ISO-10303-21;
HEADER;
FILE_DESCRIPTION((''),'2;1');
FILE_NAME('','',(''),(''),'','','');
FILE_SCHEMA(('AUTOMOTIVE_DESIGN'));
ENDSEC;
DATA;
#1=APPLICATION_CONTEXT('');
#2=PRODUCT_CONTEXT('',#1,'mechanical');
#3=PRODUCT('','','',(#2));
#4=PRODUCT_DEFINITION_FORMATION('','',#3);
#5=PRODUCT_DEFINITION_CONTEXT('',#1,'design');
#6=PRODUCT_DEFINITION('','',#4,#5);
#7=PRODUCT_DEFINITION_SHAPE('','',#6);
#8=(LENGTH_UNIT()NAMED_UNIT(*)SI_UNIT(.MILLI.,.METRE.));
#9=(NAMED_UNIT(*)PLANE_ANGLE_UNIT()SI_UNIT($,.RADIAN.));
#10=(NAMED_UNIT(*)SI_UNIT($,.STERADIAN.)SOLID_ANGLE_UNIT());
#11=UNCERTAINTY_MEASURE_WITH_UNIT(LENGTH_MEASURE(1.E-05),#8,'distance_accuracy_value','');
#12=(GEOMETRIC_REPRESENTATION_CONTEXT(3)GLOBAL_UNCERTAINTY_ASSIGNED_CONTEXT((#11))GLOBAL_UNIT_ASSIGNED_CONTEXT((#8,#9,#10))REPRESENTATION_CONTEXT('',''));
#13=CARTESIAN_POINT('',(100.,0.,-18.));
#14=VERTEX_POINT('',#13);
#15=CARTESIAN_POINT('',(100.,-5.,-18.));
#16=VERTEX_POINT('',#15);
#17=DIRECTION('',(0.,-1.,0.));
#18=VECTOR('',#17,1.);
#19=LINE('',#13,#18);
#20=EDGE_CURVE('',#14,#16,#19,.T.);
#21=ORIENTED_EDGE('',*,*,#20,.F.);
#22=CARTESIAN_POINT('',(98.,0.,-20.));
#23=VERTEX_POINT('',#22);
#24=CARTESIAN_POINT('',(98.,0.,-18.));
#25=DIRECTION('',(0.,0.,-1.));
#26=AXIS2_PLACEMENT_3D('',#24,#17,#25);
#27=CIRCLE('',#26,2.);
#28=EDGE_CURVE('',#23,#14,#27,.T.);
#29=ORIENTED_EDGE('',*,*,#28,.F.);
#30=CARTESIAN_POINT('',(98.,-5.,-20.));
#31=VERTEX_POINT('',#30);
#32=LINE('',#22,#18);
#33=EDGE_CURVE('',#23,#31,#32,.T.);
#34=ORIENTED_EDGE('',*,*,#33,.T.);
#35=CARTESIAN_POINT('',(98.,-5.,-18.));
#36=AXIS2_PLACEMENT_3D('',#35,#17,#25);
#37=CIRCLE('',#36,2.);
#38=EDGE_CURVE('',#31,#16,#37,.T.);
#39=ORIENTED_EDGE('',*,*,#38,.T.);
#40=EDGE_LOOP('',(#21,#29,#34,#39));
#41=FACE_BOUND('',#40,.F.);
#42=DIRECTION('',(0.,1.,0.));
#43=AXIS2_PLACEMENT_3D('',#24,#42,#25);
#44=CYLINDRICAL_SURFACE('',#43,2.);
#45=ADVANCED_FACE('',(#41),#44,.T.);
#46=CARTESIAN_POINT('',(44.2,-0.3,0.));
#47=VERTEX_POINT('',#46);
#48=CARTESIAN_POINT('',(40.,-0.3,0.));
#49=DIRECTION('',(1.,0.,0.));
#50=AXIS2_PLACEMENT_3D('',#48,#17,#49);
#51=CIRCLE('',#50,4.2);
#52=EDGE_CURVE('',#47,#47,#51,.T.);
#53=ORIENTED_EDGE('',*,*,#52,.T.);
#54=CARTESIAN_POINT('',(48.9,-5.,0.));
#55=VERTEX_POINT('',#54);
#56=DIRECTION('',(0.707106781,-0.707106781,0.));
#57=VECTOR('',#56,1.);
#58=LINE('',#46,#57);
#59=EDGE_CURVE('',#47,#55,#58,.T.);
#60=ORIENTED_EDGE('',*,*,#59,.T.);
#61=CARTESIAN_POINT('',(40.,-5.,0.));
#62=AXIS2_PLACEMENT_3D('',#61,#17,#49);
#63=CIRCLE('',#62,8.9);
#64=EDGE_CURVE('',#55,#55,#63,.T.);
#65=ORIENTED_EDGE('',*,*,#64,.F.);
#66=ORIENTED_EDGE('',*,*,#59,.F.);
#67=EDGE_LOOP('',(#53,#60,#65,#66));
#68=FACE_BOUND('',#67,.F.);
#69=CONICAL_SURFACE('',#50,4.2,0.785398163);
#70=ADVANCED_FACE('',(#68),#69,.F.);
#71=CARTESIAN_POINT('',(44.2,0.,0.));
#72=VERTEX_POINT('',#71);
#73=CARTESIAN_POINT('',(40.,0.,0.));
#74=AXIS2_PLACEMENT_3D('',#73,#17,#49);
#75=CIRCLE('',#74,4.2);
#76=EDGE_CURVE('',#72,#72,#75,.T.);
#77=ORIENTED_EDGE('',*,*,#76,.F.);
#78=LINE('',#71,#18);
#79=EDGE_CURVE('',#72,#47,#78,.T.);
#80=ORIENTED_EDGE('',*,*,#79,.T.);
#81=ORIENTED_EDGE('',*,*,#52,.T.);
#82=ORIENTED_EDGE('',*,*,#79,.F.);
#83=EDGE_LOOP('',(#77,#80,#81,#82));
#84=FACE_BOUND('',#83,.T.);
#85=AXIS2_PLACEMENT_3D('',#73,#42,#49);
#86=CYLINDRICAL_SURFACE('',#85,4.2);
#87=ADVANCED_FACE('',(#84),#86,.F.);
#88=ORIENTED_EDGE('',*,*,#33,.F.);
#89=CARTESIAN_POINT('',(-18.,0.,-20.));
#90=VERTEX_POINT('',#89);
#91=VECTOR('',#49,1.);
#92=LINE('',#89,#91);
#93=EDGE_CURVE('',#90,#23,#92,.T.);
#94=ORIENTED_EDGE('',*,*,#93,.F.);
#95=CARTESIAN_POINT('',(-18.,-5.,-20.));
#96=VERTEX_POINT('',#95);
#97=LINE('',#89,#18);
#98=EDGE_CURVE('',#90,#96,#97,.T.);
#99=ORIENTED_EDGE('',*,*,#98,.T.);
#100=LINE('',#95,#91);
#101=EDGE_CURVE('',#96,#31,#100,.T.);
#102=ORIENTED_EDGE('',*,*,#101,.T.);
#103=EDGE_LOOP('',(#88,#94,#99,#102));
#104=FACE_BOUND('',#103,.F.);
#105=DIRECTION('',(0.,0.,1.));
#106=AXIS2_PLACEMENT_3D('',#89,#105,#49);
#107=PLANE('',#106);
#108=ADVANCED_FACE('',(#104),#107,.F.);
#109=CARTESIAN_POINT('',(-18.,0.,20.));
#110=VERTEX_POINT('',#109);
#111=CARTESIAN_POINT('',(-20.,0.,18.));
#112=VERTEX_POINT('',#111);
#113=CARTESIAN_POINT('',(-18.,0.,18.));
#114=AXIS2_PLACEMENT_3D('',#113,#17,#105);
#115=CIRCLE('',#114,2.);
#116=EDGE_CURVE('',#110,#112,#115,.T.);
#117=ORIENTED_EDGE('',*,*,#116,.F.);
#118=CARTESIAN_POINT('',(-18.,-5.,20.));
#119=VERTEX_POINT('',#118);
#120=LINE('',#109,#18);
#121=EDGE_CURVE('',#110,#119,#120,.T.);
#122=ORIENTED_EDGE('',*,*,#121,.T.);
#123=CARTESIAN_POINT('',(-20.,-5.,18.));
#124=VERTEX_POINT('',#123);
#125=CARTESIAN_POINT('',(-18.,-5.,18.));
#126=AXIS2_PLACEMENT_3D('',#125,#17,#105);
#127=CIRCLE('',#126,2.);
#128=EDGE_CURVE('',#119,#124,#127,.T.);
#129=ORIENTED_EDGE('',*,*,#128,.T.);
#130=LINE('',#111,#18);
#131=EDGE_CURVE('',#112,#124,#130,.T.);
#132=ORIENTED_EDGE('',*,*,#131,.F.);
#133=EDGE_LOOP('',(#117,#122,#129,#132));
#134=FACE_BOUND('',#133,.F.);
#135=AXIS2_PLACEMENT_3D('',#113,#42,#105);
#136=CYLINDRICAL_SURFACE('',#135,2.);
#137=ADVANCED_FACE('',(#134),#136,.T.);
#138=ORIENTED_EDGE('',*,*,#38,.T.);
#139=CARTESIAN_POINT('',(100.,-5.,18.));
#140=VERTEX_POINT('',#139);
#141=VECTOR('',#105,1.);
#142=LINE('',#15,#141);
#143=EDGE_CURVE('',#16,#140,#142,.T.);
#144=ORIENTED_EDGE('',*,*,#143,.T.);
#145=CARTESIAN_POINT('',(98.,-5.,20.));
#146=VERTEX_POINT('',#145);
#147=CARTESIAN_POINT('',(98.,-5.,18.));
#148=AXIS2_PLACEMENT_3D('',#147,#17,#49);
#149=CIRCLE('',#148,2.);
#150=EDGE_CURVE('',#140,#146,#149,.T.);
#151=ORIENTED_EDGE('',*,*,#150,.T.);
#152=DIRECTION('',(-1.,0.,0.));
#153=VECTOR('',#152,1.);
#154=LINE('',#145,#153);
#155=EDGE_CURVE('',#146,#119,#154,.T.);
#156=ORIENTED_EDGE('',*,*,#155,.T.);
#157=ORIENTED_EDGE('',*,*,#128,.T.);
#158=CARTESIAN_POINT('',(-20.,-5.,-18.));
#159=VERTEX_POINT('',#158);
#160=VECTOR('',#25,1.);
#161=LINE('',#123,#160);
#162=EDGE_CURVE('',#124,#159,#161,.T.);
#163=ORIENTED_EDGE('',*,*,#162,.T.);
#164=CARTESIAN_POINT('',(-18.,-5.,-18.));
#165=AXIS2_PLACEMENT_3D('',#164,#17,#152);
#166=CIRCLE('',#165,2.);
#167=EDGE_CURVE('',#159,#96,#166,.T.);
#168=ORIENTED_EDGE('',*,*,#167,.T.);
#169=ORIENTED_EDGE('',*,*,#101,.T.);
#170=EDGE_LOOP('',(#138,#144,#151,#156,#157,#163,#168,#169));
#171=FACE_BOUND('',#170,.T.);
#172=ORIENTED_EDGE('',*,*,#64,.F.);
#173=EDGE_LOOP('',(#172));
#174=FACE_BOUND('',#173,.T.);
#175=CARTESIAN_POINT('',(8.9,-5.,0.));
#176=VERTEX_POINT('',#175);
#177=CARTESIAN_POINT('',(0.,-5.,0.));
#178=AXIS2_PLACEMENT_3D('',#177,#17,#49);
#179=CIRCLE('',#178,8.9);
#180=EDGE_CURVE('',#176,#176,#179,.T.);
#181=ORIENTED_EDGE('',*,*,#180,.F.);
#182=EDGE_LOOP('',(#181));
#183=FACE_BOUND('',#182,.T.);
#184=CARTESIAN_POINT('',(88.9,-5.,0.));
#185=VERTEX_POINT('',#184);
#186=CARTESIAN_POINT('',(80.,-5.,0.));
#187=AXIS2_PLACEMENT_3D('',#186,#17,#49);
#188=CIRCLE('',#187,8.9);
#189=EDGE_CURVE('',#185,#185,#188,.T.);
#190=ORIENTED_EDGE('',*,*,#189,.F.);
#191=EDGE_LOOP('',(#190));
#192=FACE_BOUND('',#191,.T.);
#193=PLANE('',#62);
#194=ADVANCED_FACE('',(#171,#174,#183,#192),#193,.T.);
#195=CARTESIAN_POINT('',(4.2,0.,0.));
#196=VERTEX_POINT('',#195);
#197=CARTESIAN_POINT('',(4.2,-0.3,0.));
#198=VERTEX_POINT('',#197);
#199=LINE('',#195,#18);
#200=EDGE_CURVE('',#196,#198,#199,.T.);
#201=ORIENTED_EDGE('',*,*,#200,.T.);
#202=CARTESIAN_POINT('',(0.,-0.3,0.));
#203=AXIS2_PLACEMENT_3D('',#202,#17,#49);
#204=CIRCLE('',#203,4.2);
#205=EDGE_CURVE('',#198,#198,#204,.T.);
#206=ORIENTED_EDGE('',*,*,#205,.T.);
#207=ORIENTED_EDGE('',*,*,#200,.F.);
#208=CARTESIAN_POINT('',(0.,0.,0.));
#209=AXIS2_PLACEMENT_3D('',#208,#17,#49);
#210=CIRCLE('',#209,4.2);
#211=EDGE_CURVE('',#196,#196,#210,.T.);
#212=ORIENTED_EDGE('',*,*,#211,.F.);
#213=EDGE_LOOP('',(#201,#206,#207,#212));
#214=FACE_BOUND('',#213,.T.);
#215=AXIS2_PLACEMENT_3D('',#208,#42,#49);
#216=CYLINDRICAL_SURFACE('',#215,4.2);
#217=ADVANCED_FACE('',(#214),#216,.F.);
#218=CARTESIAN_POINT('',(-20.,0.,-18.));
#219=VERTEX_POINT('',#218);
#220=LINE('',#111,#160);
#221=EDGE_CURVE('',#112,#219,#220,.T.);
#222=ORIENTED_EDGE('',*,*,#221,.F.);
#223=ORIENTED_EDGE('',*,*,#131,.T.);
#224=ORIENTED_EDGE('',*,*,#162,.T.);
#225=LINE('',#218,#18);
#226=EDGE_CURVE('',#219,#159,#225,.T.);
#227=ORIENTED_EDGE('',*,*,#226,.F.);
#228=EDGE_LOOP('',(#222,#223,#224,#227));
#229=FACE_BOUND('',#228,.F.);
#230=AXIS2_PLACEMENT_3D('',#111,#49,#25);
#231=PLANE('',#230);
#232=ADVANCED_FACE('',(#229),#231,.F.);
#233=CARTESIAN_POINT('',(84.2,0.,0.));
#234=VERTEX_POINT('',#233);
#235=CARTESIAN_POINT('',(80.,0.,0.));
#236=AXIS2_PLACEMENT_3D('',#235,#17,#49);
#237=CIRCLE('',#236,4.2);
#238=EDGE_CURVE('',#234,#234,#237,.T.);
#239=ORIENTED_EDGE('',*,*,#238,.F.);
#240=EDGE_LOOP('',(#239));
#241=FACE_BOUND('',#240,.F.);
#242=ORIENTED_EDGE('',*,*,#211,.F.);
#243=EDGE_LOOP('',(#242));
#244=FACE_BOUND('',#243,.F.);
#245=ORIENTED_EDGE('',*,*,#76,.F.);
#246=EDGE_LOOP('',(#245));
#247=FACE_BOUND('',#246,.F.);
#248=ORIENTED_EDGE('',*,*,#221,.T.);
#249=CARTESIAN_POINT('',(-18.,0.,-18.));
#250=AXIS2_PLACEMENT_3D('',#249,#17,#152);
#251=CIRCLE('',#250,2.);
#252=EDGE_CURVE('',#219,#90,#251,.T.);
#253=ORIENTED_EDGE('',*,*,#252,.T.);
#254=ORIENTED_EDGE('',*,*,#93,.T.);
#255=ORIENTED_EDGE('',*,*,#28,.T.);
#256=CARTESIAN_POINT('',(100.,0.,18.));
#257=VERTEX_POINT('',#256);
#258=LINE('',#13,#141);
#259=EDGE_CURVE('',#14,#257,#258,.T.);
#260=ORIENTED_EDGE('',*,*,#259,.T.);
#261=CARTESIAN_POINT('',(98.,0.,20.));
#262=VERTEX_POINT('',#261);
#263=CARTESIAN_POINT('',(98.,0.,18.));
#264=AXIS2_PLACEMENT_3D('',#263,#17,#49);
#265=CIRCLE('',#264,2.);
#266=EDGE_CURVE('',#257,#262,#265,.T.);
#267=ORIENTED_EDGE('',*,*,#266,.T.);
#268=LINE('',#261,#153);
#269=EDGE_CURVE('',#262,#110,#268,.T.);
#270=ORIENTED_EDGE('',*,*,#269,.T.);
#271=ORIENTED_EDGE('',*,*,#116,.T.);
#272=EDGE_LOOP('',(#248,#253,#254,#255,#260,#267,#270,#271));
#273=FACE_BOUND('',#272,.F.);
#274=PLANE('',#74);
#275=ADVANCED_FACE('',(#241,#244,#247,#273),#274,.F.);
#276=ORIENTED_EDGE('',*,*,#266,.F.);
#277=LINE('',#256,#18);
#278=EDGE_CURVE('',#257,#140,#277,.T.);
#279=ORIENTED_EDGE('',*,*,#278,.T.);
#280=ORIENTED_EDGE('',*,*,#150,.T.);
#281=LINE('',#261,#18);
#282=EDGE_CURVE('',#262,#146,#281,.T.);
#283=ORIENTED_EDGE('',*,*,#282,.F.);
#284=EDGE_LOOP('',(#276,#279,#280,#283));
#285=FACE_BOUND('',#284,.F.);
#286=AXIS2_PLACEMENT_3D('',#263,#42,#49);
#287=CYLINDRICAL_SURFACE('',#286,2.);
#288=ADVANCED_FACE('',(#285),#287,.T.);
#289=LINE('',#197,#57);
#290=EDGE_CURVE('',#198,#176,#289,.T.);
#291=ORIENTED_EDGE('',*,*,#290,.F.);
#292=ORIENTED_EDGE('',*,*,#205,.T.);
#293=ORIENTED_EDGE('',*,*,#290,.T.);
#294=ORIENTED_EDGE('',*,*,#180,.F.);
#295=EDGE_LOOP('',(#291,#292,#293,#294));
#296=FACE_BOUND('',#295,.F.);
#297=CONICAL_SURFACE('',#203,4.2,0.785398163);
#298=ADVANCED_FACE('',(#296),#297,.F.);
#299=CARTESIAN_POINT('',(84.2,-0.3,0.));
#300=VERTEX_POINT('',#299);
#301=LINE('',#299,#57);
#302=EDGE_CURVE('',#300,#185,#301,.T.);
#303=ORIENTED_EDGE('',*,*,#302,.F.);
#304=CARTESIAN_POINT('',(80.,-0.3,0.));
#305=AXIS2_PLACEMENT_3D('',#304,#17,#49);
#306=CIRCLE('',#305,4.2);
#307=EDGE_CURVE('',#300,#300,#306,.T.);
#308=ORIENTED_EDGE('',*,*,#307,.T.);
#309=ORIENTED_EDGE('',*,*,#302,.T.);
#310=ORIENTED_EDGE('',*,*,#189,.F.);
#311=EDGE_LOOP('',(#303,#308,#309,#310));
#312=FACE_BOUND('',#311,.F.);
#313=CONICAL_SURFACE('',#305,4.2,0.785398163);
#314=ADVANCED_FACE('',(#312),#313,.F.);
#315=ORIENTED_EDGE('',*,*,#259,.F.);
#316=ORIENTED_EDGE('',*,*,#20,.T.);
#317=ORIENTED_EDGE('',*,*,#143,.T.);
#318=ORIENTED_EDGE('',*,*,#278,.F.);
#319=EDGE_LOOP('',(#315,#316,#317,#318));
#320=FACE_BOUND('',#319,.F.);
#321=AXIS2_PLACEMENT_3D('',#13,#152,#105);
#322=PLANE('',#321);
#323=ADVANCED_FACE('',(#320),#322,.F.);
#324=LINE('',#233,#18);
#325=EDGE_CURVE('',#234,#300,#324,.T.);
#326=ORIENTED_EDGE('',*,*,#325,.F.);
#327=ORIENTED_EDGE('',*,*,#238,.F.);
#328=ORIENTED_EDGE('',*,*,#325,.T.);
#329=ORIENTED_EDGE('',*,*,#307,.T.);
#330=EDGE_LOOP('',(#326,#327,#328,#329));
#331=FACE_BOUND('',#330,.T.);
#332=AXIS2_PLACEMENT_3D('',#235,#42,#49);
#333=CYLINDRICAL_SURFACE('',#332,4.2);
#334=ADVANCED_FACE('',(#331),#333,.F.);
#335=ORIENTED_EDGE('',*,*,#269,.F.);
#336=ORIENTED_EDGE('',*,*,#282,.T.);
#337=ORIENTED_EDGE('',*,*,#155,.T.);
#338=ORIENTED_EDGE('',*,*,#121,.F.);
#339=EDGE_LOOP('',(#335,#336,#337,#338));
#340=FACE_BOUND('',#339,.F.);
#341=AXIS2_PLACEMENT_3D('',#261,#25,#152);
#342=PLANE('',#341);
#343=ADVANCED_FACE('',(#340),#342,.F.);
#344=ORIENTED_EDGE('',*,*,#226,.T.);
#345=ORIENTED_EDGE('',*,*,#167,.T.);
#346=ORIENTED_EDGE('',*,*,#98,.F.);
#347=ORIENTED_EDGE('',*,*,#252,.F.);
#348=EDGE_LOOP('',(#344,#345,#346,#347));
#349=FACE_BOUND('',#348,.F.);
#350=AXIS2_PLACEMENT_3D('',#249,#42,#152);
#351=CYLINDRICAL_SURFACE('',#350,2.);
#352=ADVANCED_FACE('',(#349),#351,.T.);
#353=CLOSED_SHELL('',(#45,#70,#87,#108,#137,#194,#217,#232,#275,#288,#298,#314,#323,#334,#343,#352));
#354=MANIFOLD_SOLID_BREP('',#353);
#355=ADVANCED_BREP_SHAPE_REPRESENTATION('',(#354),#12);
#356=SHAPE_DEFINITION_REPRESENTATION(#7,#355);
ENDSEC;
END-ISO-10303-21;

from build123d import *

# Parameters (mm, degrees)
F0_R     = 4.2
F1_DEPTH = 5
F2_SIZE  = 4.7


# Not quite as in the source:
# - a feature names something its author has since deleted; it is built from what else it names


with BuildPart() as f1:
    # F0 (on Front) → F1 (new body)
    with BuildSketch(Plane.XZ):
        with BuildLine():
            Line((98, 20), (-18, 20))
            ThreePointArc((-18, 20), (-19.4142135624, 19.4142135624), (-20, 18))
            Line((-20, 18), (-20, -18))
            ThreePointArc((-20, -18), (-19.4142135624, -19.4142135624), (-18, -20))
            Line((-18, -20), (98, -20))
            ThreePointArc((98, -20), (99.4142135624, -19.4142135624), (100, -18))
            Line((100, -18), (100, 18))
            ThreePointArc((100, 18), (99.4142135624, 19.4142135624), (98, 20))
        make_face()
        Circle(F0_R, mode=Mode.SUBTRACT)
        with Locations((40, 0)):
            Circle(F0_R, mode=Mode.SUBTRACT)
        with Locations((80, 0)):
            Circle(F0_R, mode=Mode.SUBTRACT)
    extrude(amount=F1_DEPTH)

    # F2
    f2_edges = [f1.edges().sort_by_distance(p)[0] for p in [
        (-4.2, -5, 0),
        (35.8, -5, 0),
        (75.8, -5, 0),
    ]]
    chamfer(f2_edges, length=F2_SIZE)


solid = f1.part
